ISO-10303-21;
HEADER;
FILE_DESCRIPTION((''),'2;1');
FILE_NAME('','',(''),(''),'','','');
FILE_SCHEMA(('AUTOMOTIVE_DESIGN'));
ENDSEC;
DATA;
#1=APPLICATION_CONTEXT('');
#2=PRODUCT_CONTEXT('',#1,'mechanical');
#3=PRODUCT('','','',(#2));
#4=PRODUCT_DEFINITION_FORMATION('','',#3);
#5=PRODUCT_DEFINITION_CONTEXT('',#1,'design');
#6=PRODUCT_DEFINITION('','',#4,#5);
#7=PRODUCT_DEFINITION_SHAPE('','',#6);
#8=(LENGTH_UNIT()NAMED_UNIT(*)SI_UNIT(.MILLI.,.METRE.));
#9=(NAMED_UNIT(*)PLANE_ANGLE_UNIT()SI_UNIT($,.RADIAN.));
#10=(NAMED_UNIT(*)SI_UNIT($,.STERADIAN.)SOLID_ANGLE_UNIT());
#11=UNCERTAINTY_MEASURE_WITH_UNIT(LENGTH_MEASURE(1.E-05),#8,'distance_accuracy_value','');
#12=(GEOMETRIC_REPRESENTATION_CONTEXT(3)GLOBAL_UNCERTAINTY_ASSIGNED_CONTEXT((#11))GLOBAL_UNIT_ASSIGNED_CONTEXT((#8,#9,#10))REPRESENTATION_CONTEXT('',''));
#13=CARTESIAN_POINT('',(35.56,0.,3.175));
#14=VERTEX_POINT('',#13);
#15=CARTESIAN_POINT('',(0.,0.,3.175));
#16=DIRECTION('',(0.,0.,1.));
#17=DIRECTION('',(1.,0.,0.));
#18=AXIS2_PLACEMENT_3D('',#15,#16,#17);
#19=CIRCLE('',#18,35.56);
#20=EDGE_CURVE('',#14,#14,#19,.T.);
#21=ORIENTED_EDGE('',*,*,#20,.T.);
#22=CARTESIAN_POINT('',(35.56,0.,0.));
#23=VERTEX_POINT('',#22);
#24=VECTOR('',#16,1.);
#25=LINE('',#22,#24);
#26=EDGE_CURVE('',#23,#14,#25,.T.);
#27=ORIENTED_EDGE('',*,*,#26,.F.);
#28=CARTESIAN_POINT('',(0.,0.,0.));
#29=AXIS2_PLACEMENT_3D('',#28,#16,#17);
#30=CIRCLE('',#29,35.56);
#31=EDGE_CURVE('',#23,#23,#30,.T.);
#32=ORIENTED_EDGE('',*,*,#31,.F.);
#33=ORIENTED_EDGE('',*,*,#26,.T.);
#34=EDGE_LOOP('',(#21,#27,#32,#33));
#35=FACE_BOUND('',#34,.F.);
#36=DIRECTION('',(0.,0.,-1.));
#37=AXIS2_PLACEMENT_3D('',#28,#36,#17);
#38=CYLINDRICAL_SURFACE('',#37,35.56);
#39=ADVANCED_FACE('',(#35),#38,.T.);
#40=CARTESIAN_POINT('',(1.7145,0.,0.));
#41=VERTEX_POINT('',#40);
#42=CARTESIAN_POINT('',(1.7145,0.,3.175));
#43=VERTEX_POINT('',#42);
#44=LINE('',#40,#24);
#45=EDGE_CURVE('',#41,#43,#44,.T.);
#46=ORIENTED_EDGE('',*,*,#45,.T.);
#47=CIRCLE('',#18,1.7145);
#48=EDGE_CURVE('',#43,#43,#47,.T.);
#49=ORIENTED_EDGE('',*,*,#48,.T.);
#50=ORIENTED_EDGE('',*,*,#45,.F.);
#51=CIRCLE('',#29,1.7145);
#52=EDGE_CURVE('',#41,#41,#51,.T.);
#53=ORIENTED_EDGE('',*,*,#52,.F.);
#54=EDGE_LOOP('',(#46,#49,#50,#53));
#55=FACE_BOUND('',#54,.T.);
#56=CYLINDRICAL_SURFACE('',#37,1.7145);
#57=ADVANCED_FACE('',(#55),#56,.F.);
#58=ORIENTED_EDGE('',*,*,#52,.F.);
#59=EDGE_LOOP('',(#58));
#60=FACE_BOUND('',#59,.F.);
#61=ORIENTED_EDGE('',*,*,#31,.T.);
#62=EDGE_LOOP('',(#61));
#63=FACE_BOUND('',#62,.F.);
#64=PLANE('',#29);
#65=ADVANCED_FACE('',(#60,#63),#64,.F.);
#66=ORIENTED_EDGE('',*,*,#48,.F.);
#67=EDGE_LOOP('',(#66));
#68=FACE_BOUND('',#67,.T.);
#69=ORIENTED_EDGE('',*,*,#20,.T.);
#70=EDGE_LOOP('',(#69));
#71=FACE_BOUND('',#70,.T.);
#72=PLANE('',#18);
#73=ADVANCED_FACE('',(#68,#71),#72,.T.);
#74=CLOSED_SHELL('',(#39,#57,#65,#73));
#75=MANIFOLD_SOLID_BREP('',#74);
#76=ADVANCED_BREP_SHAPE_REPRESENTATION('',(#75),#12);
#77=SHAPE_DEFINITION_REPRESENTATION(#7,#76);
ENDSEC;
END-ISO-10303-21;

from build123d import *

# Parameters (mm, degrees)
F0_R     = 35.56
F0_R_2   = 1.7145
F1_DEPTH = 3.175
F2_DEPTH = 103


# Not quite as in the source:
# - an extrude ends at something that could not be found from the text; its depth is read off the source's solid


with BuildPart() as f1:
    # F0 (on Top) → F1 (new body)
    with BuildSketch(Plane.XY):
        Circle(F0_R)
        Circle(F0_R_2, mode=Mode.SUBTRACT)
    extrude(amount=F1_DEPTH)

    # F0 (on Top) → F2 (cut, through all)
    with BuildSketch(Plane.XY):
        Circle(F0_R)
        Circle(F0_R_2, mode=Mode.SUBTRACT)
    extrude(amount=-F2_DEPTH, mode=Mode.SUBTRACT)


solid = f1.part
